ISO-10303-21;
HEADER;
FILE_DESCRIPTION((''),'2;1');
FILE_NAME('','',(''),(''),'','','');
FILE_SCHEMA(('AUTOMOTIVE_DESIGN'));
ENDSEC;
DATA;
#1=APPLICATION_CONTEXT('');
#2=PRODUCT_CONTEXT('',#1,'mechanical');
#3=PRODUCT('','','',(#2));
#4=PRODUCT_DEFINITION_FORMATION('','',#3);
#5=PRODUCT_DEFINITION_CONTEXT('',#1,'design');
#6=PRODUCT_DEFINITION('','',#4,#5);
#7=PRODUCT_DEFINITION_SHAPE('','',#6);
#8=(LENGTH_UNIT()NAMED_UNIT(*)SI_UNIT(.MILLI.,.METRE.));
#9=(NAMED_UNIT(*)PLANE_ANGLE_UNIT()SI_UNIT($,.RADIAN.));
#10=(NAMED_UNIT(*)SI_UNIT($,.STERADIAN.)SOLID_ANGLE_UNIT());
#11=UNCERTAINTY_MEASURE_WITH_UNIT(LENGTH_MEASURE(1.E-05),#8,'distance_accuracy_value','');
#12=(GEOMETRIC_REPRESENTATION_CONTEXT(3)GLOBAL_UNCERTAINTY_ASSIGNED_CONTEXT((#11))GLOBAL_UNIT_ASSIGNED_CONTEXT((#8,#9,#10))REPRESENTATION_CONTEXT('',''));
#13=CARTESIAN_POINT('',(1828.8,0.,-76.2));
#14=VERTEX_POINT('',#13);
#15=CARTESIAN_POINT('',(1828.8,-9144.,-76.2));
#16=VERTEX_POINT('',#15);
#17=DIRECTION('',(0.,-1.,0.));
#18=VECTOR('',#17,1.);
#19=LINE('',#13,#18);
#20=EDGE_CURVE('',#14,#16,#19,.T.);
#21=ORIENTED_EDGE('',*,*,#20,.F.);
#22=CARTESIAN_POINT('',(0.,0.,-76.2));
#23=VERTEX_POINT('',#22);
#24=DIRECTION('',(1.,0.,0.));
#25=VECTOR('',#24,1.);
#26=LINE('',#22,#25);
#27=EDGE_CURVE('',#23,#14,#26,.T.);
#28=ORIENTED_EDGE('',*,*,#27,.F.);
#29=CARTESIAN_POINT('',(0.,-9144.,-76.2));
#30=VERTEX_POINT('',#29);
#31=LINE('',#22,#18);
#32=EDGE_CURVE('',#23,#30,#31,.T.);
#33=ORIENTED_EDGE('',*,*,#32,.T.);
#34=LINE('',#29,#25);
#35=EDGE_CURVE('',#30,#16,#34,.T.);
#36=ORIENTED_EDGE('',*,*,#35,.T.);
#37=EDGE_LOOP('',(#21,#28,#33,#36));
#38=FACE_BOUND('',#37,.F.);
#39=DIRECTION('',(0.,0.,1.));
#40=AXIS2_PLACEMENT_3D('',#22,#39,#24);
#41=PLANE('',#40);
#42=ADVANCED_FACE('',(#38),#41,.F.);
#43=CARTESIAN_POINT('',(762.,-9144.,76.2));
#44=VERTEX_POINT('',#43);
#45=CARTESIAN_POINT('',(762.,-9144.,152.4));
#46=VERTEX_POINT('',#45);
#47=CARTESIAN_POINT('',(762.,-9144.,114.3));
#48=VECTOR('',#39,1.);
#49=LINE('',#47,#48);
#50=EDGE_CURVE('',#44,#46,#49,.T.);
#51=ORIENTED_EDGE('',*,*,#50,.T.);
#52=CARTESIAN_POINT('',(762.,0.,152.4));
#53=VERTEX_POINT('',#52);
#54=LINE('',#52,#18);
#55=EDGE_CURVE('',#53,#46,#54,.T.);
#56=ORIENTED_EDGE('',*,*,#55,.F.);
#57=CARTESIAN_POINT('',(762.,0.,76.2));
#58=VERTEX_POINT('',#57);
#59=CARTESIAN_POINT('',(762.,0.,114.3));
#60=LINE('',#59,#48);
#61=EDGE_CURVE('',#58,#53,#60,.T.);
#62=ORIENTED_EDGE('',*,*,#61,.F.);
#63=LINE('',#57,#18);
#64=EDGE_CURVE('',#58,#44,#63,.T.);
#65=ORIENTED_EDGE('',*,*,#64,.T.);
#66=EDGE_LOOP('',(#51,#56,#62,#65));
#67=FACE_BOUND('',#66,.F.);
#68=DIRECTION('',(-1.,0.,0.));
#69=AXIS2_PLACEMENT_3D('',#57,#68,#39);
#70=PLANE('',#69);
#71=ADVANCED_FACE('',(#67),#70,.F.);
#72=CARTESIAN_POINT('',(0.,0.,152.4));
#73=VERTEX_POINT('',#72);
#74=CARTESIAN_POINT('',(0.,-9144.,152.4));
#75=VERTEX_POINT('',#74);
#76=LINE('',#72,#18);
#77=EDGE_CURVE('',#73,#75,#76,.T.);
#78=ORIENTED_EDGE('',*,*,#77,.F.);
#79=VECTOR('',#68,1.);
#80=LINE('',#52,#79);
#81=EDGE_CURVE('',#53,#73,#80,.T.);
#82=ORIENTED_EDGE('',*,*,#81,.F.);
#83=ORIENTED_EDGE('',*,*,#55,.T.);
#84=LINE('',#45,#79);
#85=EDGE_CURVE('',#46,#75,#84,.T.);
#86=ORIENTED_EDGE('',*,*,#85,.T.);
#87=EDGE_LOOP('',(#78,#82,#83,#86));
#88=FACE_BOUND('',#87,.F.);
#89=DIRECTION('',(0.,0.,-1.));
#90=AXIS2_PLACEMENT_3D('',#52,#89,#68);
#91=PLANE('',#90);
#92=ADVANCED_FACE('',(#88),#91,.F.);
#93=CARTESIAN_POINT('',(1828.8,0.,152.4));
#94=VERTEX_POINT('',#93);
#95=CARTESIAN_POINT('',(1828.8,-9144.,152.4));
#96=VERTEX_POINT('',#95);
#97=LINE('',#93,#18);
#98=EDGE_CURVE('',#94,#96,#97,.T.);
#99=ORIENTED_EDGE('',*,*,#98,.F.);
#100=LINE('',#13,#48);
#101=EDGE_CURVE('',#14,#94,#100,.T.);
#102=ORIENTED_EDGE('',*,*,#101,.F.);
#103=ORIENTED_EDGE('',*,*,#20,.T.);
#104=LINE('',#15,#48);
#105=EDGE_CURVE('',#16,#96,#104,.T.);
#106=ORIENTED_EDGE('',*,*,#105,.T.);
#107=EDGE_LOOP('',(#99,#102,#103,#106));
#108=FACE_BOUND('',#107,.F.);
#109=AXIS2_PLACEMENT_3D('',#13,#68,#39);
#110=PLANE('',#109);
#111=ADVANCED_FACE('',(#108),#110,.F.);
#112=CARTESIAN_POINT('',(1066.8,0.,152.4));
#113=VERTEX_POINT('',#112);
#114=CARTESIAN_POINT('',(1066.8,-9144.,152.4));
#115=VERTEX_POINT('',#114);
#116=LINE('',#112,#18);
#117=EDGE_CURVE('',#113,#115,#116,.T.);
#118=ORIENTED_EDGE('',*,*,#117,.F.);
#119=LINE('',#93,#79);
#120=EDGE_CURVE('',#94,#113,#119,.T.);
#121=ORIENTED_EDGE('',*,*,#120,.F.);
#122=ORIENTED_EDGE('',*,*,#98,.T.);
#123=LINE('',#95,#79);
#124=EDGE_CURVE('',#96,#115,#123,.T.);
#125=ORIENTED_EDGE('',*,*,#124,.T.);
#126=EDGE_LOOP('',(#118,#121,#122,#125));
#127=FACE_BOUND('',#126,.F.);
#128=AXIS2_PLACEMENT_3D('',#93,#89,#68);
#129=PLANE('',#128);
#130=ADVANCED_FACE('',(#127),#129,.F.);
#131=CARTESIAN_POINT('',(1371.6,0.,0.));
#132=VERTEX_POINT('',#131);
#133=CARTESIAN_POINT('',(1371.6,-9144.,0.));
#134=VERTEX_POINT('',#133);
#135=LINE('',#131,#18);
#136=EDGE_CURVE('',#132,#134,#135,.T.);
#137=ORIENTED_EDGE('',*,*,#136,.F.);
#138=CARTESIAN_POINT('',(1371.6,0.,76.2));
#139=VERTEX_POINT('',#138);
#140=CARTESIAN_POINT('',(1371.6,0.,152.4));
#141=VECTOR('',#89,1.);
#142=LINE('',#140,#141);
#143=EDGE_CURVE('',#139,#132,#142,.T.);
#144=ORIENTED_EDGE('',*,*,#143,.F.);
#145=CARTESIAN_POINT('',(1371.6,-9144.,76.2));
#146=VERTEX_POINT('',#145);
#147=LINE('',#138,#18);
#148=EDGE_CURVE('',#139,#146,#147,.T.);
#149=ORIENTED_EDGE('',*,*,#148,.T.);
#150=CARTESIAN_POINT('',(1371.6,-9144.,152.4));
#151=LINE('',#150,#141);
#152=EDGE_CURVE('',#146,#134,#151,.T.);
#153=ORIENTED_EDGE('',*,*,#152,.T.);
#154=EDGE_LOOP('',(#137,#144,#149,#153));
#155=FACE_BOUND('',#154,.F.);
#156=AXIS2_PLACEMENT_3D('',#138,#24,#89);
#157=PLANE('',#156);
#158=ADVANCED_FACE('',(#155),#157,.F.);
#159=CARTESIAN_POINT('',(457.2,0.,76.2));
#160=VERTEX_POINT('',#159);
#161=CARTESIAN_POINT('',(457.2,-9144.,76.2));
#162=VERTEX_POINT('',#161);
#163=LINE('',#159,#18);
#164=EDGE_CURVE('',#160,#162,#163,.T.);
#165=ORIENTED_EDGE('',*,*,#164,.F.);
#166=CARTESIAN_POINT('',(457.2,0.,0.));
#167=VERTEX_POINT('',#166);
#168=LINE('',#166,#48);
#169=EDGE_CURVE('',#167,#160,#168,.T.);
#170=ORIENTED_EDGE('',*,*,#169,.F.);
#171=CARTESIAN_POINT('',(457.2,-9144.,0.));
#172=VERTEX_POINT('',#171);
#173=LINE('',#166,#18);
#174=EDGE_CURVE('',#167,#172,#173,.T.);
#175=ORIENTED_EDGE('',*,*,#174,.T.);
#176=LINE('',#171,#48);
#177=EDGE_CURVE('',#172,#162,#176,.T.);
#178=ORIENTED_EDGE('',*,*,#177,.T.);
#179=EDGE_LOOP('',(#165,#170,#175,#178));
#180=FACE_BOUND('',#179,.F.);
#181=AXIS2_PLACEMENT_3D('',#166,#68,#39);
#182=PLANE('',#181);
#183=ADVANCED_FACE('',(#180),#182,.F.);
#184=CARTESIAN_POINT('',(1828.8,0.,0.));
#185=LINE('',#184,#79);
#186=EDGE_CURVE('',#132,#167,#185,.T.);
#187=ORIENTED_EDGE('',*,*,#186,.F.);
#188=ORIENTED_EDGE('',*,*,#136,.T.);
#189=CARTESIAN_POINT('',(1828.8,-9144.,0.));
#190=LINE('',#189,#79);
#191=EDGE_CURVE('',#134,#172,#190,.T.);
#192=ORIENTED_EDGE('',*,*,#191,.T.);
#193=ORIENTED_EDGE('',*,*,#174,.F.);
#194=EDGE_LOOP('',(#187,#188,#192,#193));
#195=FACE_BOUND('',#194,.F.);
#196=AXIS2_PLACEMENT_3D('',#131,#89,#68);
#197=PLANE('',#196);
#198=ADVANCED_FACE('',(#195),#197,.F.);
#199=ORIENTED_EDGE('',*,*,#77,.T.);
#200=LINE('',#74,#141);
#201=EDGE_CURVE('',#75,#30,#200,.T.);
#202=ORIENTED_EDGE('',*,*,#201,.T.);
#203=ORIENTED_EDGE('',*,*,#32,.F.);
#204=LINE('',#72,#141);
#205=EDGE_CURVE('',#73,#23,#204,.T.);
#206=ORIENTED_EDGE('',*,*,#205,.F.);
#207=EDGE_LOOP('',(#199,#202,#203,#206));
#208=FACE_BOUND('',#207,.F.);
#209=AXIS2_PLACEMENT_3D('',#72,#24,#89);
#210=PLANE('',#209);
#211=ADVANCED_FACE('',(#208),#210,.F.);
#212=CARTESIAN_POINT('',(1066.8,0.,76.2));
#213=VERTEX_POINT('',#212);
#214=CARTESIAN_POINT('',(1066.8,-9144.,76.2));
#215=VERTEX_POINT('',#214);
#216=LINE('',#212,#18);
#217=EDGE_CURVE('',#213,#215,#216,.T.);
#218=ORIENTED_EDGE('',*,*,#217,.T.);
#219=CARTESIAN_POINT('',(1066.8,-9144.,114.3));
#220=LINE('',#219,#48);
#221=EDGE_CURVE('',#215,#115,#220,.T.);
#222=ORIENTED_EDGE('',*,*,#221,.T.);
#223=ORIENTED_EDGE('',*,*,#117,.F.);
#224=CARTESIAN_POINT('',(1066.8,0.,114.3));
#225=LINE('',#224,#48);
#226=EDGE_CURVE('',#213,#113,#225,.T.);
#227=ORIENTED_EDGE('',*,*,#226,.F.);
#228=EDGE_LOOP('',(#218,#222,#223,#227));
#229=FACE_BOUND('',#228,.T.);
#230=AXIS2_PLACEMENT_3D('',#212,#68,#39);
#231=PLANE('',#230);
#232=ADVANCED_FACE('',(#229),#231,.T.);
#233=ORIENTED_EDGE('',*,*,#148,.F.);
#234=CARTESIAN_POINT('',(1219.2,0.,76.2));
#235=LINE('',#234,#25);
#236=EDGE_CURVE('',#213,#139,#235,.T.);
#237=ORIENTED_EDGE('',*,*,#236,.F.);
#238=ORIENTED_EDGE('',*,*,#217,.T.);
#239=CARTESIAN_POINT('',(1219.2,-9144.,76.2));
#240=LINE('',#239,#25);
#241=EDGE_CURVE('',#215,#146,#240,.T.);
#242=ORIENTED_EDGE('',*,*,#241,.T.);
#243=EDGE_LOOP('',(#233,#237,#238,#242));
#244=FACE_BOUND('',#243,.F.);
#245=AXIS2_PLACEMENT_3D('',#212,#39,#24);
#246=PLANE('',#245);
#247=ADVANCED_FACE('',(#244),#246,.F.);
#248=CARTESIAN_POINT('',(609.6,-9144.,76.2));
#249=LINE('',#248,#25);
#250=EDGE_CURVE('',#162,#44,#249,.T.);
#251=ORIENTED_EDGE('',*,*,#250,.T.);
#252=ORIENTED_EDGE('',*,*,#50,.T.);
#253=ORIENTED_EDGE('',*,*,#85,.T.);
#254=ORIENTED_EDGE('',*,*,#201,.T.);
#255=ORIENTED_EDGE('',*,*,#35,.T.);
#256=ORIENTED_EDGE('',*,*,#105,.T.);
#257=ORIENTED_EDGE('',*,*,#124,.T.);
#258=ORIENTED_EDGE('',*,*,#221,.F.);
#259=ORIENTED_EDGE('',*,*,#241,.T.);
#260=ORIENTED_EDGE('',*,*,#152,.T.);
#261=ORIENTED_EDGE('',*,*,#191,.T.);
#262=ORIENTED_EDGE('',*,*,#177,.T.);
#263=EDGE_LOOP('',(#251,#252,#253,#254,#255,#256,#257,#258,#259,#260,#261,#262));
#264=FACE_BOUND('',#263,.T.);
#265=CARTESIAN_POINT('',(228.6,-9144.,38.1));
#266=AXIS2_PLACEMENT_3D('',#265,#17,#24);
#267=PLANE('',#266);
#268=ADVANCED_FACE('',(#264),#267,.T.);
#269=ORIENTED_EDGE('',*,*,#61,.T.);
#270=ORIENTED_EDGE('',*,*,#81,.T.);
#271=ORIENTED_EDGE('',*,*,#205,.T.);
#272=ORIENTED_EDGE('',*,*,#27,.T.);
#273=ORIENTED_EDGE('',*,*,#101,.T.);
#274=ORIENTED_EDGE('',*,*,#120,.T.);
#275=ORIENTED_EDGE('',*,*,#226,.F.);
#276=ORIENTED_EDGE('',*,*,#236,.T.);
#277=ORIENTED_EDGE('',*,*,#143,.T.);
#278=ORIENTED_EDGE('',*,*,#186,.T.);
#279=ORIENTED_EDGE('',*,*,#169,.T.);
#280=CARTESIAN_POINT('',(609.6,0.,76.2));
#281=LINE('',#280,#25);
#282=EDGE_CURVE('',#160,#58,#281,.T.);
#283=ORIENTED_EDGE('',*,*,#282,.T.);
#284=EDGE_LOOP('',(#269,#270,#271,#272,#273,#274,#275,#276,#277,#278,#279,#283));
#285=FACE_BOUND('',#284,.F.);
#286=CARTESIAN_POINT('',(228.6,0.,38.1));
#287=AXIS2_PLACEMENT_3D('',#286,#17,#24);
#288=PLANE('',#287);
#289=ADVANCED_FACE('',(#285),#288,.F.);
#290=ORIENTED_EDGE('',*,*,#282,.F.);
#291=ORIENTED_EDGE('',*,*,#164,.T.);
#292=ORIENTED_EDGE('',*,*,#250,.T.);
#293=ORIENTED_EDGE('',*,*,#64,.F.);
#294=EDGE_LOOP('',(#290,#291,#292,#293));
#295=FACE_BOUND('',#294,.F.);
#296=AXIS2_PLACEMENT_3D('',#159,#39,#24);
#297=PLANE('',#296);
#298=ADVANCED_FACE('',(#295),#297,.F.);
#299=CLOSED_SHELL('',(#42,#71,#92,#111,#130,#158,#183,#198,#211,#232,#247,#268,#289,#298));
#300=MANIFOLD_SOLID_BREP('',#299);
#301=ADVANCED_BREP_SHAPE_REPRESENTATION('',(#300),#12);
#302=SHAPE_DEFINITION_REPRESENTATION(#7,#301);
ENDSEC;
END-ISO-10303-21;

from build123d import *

# Parameters (mm, degrees)
F0_W     = 457.2
F0_H     = 76.2
F0_W_2   = 304.8
F1_DEPTH = 9144


with BuildPart() as f1:
    # F0 (on Front) → F1 (new body)
    with BuildSketch(Plane.XZ):
        with Locations((228.6, 38.1)):
            Rectangle(F0_W, F0_H)
        Polygon((457.2, 0), (0, 0), (0, -76.2), (1828.8, -76.2), (1828.8, 0), (1371.6, 0), align=None)
        with Locations((228.6, 114.3)):
            Rectangle(F0_W, F0_H)
        with Locations((1600.2, 38.1)):
            Rectangle(F0_W, F0_H)
        with Locations((609.6, 114.3)):
            Rectangle(F0_W_2, F0_H)
        with Locations((1600.2, 114.3)):
            Rectangle(F0_W, F0_H)
        with Locations((1219.2, 114.3)):
            Rectangle(F0_W_2, F0_H)
    extrude(amount=F1_DEPTH)


solid = f1.part
